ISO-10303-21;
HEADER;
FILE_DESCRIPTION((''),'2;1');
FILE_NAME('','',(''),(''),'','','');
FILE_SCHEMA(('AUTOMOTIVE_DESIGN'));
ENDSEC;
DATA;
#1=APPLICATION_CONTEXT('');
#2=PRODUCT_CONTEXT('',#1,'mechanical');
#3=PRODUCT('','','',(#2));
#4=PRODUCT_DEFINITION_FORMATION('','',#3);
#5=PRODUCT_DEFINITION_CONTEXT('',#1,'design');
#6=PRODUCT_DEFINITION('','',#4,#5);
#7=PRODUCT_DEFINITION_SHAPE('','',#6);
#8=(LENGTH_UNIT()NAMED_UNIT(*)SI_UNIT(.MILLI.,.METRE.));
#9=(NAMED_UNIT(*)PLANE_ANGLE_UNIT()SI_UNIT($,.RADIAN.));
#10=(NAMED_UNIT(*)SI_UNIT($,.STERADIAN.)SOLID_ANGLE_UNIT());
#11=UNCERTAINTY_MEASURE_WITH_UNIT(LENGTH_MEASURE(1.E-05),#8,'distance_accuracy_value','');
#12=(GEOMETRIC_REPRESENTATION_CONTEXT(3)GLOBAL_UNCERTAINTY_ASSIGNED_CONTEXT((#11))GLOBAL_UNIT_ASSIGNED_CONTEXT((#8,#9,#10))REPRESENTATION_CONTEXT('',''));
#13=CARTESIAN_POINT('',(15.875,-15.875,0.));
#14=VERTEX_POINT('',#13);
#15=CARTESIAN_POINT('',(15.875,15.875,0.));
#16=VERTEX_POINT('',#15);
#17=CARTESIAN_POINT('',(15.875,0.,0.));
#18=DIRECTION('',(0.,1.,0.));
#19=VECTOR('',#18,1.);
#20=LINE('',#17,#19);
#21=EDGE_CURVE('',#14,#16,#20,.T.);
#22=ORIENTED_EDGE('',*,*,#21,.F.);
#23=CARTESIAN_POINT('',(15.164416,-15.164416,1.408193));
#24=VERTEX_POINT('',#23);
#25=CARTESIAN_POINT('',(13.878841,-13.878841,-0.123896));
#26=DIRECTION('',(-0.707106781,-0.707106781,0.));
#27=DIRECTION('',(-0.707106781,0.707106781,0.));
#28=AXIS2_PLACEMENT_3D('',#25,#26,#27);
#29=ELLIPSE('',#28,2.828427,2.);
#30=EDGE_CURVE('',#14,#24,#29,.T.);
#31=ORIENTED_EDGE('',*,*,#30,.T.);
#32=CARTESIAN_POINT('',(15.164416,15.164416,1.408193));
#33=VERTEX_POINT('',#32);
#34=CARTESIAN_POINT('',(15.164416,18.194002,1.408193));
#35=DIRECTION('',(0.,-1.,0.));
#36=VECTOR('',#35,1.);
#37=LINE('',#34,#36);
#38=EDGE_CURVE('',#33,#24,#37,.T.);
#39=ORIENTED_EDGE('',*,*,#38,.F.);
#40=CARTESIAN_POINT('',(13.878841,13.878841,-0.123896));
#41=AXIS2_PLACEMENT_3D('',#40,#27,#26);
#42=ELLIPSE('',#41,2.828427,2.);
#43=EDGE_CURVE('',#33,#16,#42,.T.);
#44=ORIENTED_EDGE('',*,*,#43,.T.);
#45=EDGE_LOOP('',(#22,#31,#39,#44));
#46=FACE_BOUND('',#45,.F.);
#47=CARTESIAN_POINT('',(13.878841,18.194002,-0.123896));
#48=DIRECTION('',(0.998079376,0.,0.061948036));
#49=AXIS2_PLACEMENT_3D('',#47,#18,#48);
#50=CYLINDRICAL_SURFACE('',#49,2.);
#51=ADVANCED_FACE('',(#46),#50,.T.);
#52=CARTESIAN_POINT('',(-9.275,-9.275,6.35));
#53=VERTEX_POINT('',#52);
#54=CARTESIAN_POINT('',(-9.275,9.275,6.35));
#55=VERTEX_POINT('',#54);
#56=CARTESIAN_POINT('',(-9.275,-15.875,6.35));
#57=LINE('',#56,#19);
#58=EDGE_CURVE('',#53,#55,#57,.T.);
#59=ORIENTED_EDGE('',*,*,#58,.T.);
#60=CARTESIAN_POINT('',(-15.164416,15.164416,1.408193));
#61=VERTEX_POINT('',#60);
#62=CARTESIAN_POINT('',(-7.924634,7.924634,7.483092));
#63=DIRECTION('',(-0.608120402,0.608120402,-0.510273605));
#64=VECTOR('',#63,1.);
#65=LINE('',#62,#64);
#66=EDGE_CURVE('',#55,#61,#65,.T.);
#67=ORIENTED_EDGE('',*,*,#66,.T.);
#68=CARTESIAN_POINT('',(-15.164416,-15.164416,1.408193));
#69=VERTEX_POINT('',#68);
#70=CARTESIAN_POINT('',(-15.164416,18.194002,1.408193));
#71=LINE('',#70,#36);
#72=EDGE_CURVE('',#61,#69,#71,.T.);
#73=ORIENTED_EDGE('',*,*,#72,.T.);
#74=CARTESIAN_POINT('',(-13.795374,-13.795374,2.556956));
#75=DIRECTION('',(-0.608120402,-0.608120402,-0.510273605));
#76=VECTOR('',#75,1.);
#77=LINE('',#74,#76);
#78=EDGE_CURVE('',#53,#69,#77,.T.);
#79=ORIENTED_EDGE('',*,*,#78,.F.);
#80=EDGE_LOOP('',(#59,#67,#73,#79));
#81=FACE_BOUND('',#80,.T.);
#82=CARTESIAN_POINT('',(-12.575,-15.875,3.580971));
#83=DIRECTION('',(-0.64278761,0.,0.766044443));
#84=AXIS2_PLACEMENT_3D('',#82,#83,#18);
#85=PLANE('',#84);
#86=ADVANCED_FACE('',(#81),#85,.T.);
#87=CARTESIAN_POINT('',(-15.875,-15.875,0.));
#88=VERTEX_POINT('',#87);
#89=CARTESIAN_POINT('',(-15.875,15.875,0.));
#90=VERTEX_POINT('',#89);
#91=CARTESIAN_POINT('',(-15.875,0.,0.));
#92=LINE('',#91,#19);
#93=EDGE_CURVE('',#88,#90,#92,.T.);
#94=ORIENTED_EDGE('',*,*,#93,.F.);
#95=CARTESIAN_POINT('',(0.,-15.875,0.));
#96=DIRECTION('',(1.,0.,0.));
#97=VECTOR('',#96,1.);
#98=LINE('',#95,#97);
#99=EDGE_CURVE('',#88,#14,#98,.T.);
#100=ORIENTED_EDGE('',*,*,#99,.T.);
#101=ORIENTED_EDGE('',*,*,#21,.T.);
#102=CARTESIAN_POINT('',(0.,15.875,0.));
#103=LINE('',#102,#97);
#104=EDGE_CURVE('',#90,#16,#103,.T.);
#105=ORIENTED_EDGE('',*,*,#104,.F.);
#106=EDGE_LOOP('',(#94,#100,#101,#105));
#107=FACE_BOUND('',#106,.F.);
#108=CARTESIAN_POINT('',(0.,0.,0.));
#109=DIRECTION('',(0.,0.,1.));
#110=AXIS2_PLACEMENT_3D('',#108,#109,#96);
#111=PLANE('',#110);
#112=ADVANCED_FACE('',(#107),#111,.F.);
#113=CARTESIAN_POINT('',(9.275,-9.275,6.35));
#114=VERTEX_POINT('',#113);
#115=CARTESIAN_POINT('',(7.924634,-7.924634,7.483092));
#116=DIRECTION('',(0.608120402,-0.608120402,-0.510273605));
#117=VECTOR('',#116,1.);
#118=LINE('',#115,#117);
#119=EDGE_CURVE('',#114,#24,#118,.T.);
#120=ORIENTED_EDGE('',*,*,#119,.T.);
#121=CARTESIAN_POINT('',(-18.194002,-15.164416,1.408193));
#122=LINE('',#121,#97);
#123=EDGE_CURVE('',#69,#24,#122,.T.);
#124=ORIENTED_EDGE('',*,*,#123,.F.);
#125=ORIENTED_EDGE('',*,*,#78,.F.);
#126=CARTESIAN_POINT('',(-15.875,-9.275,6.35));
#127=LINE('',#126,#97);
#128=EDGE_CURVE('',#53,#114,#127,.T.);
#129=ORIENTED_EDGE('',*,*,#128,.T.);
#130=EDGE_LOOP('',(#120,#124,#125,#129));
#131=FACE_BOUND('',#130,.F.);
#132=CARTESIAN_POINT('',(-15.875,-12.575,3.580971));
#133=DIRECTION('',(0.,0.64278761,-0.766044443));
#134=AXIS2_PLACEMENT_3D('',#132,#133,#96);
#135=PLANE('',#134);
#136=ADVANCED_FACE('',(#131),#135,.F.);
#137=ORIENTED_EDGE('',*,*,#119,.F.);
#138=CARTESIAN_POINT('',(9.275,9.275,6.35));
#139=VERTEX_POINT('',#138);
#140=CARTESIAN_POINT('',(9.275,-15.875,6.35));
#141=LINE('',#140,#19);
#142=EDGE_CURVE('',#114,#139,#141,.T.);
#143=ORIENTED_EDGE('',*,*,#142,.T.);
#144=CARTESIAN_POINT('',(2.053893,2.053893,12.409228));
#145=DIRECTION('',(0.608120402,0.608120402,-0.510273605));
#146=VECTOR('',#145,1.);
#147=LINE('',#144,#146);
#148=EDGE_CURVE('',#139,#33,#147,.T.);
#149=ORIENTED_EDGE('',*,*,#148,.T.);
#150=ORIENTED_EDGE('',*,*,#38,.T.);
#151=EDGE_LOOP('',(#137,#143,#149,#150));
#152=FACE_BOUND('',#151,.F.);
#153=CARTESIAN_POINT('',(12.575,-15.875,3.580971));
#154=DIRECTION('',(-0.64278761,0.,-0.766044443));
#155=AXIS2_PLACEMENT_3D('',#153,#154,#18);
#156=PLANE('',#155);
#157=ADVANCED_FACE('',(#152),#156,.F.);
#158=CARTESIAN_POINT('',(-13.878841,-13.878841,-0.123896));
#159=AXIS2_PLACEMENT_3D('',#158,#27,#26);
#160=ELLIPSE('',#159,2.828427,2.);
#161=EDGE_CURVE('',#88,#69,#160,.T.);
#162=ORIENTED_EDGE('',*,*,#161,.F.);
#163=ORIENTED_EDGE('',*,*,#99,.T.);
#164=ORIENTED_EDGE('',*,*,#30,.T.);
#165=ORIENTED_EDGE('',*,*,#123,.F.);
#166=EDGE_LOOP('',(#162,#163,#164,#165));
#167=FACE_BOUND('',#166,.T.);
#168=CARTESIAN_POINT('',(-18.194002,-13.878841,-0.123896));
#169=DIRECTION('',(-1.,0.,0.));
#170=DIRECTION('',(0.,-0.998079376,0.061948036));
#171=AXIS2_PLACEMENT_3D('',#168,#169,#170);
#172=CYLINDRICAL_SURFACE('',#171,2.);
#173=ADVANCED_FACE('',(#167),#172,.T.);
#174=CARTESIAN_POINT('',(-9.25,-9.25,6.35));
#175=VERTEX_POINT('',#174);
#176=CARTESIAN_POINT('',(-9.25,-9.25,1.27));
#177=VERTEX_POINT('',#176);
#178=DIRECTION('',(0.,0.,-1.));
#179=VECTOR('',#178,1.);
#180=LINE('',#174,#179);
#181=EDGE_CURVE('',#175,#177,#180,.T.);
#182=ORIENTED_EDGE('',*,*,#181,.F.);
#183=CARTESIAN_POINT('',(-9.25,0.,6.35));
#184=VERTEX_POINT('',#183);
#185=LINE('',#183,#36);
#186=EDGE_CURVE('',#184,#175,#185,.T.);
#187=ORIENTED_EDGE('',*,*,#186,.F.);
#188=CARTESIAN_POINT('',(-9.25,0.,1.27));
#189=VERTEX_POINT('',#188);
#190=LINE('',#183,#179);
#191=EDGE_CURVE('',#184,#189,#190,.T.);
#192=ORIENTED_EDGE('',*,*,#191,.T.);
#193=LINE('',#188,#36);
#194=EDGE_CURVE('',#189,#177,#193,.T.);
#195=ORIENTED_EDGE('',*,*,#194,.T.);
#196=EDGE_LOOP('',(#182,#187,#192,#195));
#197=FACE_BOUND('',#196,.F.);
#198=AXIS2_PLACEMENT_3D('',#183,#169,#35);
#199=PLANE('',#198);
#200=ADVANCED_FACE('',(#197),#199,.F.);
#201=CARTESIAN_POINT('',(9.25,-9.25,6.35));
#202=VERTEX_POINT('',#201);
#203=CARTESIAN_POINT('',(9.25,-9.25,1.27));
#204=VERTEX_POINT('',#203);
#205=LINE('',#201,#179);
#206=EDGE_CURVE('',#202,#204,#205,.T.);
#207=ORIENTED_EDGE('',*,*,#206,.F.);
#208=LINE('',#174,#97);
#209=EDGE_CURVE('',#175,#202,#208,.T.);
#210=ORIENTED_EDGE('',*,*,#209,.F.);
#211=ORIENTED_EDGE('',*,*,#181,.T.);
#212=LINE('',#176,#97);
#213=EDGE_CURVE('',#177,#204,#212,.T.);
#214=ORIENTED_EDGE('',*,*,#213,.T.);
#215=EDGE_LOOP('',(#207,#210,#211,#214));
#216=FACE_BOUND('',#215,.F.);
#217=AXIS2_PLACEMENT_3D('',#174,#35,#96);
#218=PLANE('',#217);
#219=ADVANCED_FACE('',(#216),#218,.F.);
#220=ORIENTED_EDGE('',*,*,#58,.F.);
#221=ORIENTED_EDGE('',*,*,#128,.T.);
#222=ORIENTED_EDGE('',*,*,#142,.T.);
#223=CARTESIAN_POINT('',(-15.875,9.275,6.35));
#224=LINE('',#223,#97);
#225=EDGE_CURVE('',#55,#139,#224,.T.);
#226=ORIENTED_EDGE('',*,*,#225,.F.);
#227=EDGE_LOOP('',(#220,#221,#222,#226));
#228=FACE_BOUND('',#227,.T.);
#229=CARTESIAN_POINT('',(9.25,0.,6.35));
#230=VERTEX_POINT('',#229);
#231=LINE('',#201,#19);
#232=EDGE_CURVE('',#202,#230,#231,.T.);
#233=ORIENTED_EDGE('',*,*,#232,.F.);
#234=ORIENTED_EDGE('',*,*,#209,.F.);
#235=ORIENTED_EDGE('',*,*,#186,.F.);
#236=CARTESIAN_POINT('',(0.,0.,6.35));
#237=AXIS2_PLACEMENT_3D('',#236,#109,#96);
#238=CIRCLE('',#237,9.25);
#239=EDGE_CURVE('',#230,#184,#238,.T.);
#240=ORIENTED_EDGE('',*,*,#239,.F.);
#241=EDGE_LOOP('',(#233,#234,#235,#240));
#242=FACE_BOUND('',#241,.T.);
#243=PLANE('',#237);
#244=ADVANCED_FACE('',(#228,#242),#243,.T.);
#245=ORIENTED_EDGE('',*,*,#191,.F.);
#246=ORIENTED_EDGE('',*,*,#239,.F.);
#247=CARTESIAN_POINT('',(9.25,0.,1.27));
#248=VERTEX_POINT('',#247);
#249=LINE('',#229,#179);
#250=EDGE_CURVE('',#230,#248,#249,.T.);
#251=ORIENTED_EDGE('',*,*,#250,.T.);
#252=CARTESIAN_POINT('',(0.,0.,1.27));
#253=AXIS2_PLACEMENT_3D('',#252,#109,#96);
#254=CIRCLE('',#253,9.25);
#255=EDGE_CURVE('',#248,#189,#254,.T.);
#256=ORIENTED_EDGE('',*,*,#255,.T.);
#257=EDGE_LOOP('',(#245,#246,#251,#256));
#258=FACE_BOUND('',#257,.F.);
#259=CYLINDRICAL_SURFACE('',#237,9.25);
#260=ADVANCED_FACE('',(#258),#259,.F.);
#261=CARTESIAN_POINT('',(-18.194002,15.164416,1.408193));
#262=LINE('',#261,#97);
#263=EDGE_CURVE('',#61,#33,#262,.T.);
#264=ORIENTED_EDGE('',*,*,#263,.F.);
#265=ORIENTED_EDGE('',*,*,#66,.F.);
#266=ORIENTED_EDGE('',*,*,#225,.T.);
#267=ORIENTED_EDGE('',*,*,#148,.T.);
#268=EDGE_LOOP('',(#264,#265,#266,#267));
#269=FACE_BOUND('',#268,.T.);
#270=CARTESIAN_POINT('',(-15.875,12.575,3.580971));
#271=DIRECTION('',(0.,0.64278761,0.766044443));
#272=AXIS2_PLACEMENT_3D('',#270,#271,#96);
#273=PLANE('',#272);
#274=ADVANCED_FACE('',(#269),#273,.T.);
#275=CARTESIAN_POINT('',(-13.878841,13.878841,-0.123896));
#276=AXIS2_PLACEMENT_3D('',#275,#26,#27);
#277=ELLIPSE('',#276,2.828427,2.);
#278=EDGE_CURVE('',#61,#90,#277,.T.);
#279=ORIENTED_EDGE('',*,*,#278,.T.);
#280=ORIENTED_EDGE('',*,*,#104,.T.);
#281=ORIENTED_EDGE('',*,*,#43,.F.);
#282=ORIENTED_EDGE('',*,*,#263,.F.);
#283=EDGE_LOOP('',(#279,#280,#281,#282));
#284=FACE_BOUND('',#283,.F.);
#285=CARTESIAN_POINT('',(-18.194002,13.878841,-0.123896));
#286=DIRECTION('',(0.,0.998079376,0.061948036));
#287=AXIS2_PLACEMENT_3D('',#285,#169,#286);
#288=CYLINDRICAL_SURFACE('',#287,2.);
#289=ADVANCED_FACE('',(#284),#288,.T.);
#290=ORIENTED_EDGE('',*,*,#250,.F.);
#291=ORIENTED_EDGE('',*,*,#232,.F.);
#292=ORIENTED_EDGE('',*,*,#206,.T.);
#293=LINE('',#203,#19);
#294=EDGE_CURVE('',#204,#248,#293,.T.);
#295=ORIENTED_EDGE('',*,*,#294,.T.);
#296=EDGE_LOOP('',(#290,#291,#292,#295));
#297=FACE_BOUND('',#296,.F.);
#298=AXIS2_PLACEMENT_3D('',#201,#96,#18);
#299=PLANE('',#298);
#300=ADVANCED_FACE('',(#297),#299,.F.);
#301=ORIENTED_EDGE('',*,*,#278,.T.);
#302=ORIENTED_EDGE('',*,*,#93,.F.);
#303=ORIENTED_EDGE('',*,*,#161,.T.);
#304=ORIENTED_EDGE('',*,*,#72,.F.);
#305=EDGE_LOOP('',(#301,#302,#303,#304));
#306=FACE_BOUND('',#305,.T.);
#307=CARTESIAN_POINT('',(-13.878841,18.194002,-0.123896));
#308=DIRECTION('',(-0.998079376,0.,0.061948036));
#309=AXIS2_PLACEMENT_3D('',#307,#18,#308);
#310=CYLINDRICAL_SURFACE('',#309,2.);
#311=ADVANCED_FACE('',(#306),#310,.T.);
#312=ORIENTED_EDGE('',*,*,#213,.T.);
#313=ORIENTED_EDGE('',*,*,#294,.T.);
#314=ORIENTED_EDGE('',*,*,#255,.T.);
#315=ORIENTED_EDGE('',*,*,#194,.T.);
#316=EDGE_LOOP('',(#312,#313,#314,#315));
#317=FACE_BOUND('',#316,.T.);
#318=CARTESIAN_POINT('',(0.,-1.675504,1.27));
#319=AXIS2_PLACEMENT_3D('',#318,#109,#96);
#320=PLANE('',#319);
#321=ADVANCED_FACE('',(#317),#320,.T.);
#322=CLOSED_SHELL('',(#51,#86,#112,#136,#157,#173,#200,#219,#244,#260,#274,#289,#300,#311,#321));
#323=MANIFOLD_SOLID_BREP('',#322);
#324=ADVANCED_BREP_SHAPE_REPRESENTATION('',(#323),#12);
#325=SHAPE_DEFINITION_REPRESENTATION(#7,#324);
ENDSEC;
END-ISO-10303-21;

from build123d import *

# Parameters (mm, degrees)
F0_W        = 31.75
F0_H        = 31.75
F1_DEPTH    = 6.35
F2_SIZE2    = 5.5380575658
F2_SIZE     = 6.6
F4_DEPTH    = 5.08
F5_T1_DEPTH = 36.3880046162
F5_T3_DEPTH = 36.3880046162


# Not quite as in the source:
# - a fillet or chamfer that OpenCascade refuses, or shapes differently, is made with other operations: its cross-section is extruded or revolved along the edge and cut away or added


with BuildPart() as f1:
    # F0 (on Top) → F1 (new body)
    with BuildSketch(Plane.XY):
        Rectangle(F0_W, F0_H)
    extrude(amount=F1_DEPTH)

    # F2
    f2_edges = [f1.edges().sort_by_distance(p)[0] for p in [
        (-15.875, 0, 6.35),
        (0, -15.875, 6.35),
        (15.875, 0, 6.35),
        (0, 15.875, 6.35),
    ]]
    f2_side = f1.faces().sort_by_distance((0, 0, 6.35))[0]
    chamfer(f2_edges, length=F2_SIZE, length2=F2_SIZE2, reference=f2_side)

    # F3 (on face) → F4 (cut)
    with BuildSketch(Plane.XY.offset(6.35)):
        with BuildLine():
            Line((9.25, -9.25), (9.25, 0))
            ThreePointArc((9.25, 0), (0, 9.25), (-9.25, 0))
            Line((-9.25, 0), (-9.25, -9.25))
            Line((-9.25, -9.25), (9.25, -9.25))
        make_face()
    extrude(amount=-F4_DEPTH, mode=Mode.SUBTRACT)

    # F5: fillet of radius 2 on 4 edges, made by hand

    # F5_s2 → F5_t1 (cut)
    with BuildSketch(Plane.YZ.offset(-18.1940023081)):
        with BuildLine():
            ThreePointArc((-15.875, 0), (-15.6643933238, 0.7771054734), (-15.1644164673, 1.4081928144))
            Line((-15.1644164673, 1.4081928144), (-15.875, 0.8119424342))
            Line((-15.875, 0.8119424342), (-15.875, 0))
        make_face()
        with BuildLine():
            ThreePointArc((15.875, 0), (15.6643933238, 0.7771054734), (15.1644164673, 1.4081928144))
            Line((15.1644164673, 1.4081928144), (15.875, 0.8119424342))
            Line((15.875, 0.8119424342), (15.875, 0))
        make_face()
    extrude(amount=F5_T1_DEPTH, mode=Mode.SUBTRACT)

    # F5_s4 → F5_t3 (cut)
    with BuildSketch(Plane.XZ.offset(-18.1940023081)):
        with BuildLine():
            ThreePointArc((15.875, 0), (15.6643933238, 0.7771054734), (15.1644164673, 1.4081928144))
            Line((15.1644164673, 1.4081928144), (15.875, 0.8119424342))
            Line((15.875, 0.8119424342), (15.875, 0))
        make_face()
        with BuildLine():
            ThreePointArc((-15.875, 0), (-15.6643933238, 0.7771054734), (-15.1644164673, 1.4081928144))
            Line((-15.1644164673, 1.4081928144), (-15.875, 0.8119424342))
            Line((-15.875, 0.8119424342), (-15.875, 0))
        make_face()
    extrude(amount=F5_T3_DEPTH, mode=Mode.SUBTRACT)


solid = f1.part
